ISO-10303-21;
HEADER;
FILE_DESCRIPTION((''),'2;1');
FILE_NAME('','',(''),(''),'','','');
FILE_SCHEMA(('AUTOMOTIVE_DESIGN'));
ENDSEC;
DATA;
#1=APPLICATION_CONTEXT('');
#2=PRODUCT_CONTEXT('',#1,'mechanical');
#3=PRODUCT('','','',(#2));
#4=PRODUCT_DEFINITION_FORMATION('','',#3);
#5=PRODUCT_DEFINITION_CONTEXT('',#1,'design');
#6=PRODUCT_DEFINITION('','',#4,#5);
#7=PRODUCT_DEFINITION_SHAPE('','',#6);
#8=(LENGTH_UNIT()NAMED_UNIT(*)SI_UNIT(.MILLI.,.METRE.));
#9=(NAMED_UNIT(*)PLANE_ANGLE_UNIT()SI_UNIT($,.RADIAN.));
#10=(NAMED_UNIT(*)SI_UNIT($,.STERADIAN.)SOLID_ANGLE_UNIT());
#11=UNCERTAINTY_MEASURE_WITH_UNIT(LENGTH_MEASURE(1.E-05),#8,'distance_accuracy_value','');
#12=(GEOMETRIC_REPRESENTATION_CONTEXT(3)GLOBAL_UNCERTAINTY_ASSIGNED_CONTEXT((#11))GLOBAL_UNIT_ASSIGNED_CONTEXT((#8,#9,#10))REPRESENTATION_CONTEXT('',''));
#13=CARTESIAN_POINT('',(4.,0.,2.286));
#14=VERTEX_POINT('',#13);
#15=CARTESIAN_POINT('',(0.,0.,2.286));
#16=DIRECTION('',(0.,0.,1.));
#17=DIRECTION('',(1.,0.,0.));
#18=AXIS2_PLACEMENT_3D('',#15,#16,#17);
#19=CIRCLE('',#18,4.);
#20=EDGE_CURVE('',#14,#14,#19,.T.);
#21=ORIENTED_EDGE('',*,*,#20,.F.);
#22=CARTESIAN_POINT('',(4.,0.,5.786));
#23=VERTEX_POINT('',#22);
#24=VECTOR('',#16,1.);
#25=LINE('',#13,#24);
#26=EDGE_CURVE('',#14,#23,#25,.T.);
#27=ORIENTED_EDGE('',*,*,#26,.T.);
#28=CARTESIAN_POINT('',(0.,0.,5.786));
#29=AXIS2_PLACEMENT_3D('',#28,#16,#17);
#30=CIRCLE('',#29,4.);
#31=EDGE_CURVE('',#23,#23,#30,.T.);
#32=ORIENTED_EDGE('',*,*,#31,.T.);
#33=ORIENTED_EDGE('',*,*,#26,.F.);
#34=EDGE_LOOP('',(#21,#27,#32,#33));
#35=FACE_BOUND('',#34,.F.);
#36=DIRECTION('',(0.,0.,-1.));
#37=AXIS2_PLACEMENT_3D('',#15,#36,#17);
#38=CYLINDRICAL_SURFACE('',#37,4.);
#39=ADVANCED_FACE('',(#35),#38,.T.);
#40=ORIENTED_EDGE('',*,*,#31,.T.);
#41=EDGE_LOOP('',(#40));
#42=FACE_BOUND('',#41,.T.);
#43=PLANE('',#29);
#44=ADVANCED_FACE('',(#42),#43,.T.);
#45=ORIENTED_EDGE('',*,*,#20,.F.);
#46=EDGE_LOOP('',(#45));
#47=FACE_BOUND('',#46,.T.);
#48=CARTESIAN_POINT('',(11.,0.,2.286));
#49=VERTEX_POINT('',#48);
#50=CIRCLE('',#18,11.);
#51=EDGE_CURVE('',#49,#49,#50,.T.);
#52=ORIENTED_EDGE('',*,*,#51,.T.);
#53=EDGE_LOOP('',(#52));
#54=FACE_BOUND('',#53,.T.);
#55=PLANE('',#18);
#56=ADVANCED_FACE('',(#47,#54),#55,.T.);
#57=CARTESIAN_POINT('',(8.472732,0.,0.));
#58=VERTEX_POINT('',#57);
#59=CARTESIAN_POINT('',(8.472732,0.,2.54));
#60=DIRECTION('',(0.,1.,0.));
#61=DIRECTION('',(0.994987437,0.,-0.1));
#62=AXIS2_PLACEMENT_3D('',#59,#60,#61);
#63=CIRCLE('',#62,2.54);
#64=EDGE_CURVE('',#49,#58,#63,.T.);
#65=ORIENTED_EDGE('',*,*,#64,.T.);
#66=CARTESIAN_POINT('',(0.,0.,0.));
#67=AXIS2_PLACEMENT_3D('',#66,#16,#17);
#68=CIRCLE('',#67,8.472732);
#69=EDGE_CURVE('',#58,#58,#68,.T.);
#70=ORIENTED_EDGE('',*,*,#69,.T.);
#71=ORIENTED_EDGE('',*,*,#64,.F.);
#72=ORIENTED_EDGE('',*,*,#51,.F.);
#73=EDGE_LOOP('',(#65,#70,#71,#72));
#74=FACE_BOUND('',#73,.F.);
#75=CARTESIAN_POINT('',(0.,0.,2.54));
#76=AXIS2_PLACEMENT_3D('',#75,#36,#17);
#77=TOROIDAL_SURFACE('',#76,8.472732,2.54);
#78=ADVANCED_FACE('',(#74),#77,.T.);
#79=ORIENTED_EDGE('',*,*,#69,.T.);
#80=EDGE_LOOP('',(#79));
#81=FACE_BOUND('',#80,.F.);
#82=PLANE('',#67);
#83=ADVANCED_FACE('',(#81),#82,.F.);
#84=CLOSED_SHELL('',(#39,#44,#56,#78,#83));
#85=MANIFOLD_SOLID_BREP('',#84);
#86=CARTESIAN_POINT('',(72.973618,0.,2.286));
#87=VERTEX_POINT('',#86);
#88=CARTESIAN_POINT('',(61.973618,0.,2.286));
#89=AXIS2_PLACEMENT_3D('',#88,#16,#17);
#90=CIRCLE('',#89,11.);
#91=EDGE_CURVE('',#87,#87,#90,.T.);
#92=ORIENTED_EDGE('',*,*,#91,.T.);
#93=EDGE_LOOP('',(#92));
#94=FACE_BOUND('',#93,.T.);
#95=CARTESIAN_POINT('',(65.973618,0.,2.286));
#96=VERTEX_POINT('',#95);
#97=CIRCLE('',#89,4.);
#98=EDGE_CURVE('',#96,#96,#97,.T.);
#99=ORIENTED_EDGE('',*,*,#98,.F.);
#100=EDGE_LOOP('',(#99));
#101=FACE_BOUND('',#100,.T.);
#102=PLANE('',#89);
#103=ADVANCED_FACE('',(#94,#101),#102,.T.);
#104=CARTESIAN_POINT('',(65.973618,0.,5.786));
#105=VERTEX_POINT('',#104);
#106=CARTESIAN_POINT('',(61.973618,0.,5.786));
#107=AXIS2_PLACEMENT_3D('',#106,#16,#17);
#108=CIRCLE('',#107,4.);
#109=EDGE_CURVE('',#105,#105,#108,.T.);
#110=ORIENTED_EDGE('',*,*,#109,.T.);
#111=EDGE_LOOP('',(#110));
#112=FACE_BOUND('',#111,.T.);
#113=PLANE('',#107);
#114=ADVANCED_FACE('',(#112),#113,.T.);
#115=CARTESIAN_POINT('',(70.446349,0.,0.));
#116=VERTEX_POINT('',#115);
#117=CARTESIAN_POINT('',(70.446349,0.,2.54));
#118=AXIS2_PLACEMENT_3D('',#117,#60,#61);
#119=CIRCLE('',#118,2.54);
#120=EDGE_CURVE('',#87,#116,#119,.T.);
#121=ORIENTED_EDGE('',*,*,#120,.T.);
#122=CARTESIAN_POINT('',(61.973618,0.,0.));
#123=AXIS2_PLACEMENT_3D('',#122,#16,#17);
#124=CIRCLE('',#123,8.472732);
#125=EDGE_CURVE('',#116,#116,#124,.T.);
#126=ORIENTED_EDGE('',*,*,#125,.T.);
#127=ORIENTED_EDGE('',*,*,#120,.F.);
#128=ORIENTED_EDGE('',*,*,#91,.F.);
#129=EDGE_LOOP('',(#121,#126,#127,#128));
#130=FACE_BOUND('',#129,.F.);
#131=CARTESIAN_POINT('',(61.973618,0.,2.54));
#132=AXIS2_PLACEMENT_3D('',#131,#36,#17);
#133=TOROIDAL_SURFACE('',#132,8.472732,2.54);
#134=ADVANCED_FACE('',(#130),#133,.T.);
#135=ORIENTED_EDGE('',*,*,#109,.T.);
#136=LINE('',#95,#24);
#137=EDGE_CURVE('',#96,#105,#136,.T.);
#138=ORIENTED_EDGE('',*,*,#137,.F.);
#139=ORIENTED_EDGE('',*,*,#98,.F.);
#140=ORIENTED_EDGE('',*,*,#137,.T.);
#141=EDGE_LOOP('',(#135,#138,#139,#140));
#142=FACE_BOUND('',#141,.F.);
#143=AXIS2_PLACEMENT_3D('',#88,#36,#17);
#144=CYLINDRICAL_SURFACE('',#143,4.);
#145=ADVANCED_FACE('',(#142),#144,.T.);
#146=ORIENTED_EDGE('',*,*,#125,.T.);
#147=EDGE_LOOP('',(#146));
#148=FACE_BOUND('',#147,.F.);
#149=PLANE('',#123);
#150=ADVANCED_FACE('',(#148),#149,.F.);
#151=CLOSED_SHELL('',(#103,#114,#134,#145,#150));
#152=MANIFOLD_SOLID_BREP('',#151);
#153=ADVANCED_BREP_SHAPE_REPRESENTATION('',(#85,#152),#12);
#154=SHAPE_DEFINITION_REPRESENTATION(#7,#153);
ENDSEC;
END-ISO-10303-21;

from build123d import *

# Parameters (mm, degrees)
F0_R     = 11
F1_DEPTH = 2.286
F2_R     = 4
F3_DEPTH = 3.5
F5_R     = 11
F6_DEPTH = 2.286
F7_R     = 4
F8_DEPTH = 3.5


# Not quite as in the source:
# - a fillet or chamfer that OpenCascade refuses, or shapes differently, is made with other operations: its cross-section is extruded or revolved along the edge and cut away or added


with BuildPart() as f1:
    # F0 (on Top) → F1 (new body)
    with BuildSketch(Plane.XY):
        Circle(F0_R)
    extrude(amount=F1_DEPTH)

    # F2 (on face) → F3 (join)
    with BuildSketch(Plane.XY.offset(2.286)):
        Circle(F2_R)
    extrude(amount=F3_DEPTH)

    # F4: fillet of radius 2.54 on 1 edges, made by hand

    # F4_s1 → F4_t2 (revolve, cut)
    with BuildSketch(Plane.XZ):
        with BuildLine():
            ThreePointArc((11, 2.286), (10.1766157086, 0.6562855843), (8.4727319097, 0))
            Line((8.4727319097, 0), (11, 0))
            Line((11, 0), (11, 2.286))
        make_face()
    revolve(axis=Axis((0, 0, 0), (0, 0, 1)), mode=Mode.SUBTRACT)


with BuildPart() as f6:
    # F5 (on Top) → F6 (new body)
    with BuildSketch(Plane.XY):
        with Locations((61.9736175734, 0)):
            Circle(F5_R)
    extrude(amount=F6_DEPTH)

    # F7 (on face) → F8 (join)
    with BuildSketch(Plane.XY.offset(2.286)):
        with Locations((61.9736175734, 0)):
            Circle(F7_R)
    extrude(amount=F8_DEPTH)

    # F9: fillet of radius 2.54 on 1 edges, made by hand

    # F9_s1 → F9_t2 (revolve, cut)
    with BuildSketch(Plane.XZ):
        with BuildLine():
            ThreePointArc((72.9736175734, 2.286), (72.150233282, 0.6562855843), (70.4463494832, 0))
            Line((70.4463494832, 0), (72.9736175734, 0))
            Line((72.9736175734, 0), (72.9736175734, 2.286))
        make_face()
    revolve(axis=Axis((61.9736175734, 0, 0), (0, 0, 1)), mode=Mode.SUBTRACT)


solid = Compound([f1.part, f6.part])
